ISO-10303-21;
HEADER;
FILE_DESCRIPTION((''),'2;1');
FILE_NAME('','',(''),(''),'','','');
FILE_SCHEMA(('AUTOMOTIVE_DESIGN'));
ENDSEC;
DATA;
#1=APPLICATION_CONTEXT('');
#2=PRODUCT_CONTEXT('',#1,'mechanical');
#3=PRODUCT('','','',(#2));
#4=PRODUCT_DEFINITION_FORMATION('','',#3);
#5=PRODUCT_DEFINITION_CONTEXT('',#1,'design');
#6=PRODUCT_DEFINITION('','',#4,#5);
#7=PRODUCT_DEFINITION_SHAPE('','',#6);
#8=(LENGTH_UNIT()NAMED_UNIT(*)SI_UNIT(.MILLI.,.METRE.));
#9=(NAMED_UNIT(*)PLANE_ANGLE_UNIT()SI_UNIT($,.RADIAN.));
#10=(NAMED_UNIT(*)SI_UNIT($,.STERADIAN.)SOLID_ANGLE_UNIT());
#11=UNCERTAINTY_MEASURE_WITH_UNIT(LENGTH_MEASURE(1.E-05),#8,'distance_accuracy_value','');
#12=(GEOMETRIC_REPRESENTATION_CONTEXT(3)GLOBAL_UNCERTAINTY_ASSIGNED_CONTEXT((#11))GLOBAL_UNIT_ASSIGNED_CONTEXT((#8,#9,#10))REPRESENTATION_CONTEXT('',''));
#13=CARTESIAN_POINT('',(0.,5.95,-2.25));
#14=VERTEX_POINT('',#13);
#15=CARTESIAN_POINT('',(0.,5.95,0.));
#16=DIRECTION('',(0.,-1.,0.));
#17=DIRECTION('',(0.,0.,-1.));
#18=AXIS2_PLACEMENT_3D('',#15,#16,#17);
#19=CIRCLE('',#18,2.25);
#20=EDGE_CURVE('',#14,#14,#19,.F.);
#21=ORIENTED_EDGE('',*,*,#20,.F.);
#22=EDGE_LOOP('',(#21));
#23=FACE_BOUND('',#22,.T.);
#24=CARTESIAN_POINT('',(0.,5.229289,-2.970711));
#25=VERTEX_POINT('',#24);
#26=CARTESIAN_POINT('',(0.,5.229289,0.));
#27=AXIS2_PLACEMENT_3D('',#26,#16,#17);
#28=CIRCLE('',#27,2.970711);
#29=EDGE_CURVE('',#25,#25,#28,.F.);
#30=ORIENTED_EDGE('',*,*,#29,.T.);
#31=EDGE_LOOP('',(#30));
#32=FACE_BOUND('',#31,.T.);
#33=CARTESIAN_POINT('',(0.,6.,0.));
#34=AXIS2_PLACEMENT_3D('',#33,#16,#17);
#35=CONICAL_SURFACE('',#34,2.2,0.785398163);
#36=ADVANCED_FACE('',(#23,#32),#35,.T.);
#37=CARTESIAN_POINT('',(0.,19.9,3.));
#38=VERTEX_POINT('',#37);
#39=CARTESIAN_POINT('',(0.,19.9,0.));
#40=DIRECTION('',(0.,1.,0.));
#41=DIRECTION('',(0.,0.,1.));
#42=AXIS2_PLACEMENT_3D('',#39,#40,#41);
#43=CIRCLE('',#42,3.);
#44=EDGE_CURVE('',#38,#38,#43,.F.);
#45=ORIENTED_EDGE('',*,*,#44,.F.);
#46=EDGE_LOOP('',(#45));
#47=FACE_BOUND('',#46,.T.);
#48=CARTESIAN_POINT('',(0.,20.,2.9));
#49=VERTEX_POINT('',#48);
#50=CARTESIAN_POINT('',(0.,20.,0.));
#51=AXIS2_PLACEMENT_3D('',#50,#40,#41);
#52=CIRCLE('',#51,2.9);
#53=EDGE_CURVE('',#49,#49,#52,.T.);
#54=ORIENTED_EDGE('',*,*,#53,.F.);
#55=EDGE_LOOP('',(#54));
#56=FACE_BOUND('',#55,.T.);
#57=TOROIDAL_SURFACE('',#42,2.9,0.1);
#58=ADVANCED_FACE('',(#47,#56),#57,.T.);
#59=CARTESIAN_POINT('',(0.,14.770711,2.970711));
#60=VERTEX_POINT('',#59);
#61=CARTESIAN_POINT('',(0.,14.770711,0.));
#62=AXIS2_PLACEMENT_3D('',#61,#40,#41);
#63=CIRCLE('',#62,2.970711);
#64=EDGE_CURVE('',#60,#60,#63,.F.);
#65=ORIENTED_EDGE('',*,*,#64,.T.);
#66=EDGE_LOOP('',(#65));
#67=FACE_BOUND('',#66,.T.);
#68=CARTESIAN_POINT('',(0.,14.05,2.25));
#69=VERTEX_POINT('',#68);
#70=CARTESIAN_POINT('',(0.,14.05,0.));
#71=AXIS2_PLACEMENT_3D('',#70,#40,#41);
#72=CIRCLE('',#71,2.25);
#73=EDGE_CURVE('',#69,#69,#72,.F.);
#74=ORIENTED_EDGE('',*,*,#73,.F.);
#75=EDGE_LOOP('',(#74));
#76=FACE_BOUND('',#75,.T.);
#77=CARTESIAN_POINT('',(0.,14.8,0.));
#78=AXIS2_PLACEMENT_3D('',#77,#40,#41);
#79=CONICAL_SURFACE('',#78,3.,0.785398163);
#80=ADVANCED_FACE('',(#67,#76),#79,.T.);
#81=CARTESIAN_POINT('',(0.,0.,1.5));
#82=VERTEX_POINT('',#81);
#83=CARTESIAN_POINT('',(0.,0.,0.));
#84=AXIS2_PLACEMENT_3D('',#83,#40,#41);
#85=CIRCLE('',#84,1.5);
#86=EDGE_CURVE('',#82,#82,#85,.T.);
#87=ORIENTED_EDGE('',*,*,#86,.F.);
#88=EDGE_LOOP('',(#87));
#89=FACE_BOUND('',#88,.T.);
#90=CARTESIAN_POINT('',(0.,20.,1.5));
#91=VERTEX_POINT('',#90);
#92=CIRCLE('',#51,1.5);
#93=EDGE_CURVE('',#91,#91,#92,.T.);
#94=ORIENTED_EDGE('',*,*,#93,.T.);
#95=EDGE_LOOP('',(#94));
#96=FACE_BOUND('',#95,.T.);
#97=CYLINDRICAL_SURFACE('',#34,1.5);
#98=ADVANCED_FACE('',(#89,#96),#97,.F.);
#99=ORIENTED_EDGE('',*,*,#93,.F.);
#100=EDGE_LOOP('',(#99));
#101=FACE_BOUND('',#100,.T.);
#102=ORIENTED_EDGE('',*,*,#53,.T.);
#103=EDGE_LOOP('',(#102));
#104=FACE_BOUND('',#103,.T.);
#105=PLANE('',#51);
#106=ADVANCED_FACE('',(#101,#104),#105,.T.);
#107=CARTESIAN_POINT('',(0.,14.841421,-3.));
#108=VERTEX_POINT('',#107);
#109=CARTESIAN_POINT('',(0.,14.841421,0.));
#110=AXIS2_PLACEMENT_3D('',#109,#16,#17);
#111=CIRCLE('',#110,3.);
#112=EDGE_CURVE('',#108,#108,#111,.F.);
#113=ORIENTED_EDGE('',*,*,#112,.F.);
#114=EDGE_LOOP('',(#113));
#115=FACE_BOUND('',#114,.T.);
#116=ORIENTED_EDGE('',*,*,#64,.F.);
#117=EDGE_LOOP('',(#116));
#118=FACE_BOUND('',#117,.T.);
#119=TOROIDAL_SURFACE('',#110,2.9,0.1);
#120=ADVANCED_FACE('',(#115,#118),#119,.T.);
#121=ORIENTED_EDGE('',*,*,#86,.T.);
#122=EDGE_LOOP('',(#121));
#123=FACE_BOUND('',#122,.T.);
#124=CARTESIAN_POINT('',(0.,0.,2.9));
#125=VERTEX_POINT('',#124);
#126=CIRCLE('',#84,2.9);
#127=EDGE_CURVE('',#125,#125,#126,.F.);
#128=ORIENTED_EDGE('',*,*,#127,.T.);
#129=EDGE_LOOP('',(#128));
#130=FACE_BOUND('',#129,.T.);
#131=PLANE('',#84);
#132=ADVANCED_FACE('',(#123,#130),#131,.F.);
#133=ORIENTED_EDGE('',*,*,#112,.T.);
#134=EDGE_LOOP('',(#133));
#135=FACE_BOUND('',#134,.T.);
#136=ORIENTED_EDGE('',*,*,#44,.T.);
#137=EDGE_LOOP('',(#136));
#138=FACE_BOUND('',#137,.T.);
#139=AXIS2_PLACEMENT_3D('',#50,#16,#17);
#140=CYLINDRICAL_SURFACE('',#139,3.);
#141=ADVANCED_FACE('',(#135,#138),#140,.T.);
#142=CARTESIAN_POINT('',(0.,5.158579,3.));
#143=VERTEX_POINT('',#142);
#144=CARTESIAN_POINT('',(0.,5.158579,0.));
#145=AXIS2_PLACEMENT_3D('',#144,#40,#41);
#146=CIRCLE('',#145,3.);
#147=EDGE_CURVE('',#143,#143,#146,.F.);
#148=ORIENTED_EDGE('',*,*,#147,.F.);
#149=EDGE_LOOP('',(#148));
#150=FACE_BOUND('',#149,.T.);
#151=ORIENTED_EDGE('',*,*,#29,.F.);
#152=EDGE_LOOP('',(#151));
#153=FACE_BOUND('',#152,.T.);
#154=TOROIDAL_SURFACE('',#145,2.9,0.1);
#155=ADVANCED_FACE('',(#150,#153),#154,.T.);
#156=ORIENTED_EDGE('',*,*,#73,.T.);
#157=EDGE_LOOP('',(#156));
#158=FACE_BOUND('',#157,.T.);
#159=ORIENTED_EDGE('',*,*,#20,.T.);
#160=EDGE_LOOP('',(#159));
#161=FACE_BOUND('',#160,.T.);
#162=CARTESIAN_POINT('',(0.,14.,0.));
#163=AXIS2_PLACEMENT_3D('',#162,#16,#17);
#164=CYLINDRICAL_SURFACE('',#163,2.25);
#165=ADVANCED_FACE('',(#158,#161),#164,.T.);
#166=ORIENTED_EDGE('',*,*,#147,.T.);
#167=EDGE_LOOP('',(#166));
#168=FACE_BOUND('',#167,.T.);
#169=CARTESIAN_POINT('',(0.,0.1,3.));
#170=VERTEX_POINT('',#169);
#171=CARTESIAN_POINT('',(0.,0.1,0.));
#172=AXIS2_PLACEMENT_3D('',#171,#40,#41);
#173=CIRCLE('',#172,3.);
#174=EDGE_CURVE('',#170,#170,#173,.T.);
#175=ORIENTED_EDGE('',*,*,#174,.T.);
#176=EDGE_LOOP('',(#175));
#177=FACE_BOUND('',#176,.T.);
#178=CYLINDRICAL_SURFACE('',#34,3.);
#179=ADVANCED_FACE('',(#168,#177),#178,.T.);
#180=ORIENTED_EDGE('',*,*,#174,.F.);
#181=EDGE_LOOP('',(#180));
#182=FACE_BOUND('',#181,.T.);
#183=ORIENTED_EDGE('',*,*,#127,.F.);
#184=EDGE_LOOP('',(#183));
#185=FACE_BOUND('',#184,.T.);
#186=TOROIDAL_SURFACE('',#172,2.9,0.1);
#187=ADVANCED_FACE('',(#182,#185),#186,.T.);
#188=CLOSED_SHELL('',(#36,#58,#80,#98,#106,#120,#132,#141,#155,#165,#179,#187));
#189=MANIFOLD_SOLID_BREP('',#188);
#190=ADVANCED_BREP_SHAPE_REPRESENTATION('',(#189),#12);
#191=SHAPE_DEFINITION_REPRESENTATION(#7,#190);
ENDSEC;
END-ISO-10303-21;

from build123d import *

# Parameters (mm, degrees)
SKETCH_1_R      = 3
SKETCH_1_R_2    = 1.5
EXTRUDE_1_DEPTH = 6
SKETCH_2_R      = 2.25
SKETCH_2_R_2    = 1.5
EXTRUDE_2_DEPTH = 8
SKETCH_3_R      = 3
SKETCH_3_R_2    = 1.5
EXTRUDE_3_DEPTH = 6
CHAMFER_1_SIZE  = 0.8
FILLET_1_R      = 0.1


with BuildPart() as part:
    # 草图1 → 凸台-拉伸1 (new body)
    with BuildSketch(Plane(origin=(0, 0, 0), x_dir=(1, 0, 0), z_dir=(0, 1, 0))):
        with Locations(Location((0, 0, 0), (0, 0, 270))):
            Circle(SKETCH_1_R)
        with Locations(Location((0, 0, 0), (0, 0, 270))):
            Circle(SKETCH_1_R_2, mode=Mode.SUBTRACT)
    extrude(amount=EXTRUDE_1_DEPTH)

    # 草图2 → 凸台-拉伸2 (add)
    with BuildSketch(Plane(origin=(0, 6, 0), x_dir=(1, 0, 0), z_dir=(0, 1, 0))):
        with Locations(Location((0, 0, 0), (0, 0, 270))):
            Circle(SKETCH_2_R)
        with Locations(Location((0, 0, 0), (0, 0, 270))):
            Circle(SKETCH_2_R_2, mode=Mode.SUBTRACT)
    extrude(amount=EXTRUDE_2_DEPTH)

    # 草图3 → 凸台-拉伸3 (add)
    with BuildSketch(Plane(origin=(0, 14, 0), x_dir=(1, 0, 0), z_dir=(0, 1, 0))):
        with Locations(Location((0, 0, 0), (0, 0, 270))):
            Circle(SKETCH_3_R)
        with Locations(Location((0, 0, 0), (0, 0, 270))):
            Circle(SKETCH_3_R_2, mode=Mode.SUBTRACT)
    extrude(amount=EXTRUDE_3_DEPTH)

    # 倒角1
    # the kernel refuses this chamfer: 0.8 mm, written as the material it takes off along each edge
    with BuildSketch(Plane(origin=(0, 6, 0), x_dir=(0, 0, 1), z_dir=(-1, 0, 0))) as chamfer_1_piece_1_section:
        Polygon((3, -CHAMFER_1_SIZE), (3 - CHAMFER_1_SIZE, 0), (3, 0), align=None)
    chamfer_1_piece_1 = revolve(axis=Axis((0, 6, 0), (0, 1, 0)), mode=Mode.PRIVATE)
    chamfer_1_piece_1 = chamfer_1_piece_1 - Plane(origin=(0, 5.57653803, 0), x_dir=(0, 0, 1), z_dir=(0, -1, 0)) * Cylinder(2.25, 12, mode=Mode.PRIVATE)
    add(chamfer_1_piece_1, mode=Mode.SUBTRACT)
    with BuildSketch(Plane(origin=(0, 14, 0), x_dir=(0, 0, 1), z_dir=(-1, 0, 0))) as chamfer_1_piece_2_section:
        Polygon((3 - CHAMFER_1_SIZE, 0), (3, CHAMFER_1_SIZE), (3, 0), align=None)
    chamfer_1_piece_2 = revolve(axis=Axis((0, 14, 0), (0, 1, 0)), mode=Mode.PRIVATE)
    chamfer_1_piece_2 = chamfer_1_piece_2 - Plane(origin=(0, 14.42346197, 0), x_dir=(0, 0, 1), z_dir=(0, -1, 0)) * Cylinder(2.25, 13, mode=Mode.PRIVATE)
    add(chamfer_1_piece_2, mode=Mode.SUBTRACT)

    # 圆角1
    fillet_1_edges = [part.edges().sort_by_distance(p)[0] for p in [
        (0, 20, -3),
        (0, 0, -3),
        (0, 5.2, -3),
        (0, 14.8, -3),
    ]]
    fillet(fillet_1_edges, radius=FILLET_1_R)


solid = part.part
